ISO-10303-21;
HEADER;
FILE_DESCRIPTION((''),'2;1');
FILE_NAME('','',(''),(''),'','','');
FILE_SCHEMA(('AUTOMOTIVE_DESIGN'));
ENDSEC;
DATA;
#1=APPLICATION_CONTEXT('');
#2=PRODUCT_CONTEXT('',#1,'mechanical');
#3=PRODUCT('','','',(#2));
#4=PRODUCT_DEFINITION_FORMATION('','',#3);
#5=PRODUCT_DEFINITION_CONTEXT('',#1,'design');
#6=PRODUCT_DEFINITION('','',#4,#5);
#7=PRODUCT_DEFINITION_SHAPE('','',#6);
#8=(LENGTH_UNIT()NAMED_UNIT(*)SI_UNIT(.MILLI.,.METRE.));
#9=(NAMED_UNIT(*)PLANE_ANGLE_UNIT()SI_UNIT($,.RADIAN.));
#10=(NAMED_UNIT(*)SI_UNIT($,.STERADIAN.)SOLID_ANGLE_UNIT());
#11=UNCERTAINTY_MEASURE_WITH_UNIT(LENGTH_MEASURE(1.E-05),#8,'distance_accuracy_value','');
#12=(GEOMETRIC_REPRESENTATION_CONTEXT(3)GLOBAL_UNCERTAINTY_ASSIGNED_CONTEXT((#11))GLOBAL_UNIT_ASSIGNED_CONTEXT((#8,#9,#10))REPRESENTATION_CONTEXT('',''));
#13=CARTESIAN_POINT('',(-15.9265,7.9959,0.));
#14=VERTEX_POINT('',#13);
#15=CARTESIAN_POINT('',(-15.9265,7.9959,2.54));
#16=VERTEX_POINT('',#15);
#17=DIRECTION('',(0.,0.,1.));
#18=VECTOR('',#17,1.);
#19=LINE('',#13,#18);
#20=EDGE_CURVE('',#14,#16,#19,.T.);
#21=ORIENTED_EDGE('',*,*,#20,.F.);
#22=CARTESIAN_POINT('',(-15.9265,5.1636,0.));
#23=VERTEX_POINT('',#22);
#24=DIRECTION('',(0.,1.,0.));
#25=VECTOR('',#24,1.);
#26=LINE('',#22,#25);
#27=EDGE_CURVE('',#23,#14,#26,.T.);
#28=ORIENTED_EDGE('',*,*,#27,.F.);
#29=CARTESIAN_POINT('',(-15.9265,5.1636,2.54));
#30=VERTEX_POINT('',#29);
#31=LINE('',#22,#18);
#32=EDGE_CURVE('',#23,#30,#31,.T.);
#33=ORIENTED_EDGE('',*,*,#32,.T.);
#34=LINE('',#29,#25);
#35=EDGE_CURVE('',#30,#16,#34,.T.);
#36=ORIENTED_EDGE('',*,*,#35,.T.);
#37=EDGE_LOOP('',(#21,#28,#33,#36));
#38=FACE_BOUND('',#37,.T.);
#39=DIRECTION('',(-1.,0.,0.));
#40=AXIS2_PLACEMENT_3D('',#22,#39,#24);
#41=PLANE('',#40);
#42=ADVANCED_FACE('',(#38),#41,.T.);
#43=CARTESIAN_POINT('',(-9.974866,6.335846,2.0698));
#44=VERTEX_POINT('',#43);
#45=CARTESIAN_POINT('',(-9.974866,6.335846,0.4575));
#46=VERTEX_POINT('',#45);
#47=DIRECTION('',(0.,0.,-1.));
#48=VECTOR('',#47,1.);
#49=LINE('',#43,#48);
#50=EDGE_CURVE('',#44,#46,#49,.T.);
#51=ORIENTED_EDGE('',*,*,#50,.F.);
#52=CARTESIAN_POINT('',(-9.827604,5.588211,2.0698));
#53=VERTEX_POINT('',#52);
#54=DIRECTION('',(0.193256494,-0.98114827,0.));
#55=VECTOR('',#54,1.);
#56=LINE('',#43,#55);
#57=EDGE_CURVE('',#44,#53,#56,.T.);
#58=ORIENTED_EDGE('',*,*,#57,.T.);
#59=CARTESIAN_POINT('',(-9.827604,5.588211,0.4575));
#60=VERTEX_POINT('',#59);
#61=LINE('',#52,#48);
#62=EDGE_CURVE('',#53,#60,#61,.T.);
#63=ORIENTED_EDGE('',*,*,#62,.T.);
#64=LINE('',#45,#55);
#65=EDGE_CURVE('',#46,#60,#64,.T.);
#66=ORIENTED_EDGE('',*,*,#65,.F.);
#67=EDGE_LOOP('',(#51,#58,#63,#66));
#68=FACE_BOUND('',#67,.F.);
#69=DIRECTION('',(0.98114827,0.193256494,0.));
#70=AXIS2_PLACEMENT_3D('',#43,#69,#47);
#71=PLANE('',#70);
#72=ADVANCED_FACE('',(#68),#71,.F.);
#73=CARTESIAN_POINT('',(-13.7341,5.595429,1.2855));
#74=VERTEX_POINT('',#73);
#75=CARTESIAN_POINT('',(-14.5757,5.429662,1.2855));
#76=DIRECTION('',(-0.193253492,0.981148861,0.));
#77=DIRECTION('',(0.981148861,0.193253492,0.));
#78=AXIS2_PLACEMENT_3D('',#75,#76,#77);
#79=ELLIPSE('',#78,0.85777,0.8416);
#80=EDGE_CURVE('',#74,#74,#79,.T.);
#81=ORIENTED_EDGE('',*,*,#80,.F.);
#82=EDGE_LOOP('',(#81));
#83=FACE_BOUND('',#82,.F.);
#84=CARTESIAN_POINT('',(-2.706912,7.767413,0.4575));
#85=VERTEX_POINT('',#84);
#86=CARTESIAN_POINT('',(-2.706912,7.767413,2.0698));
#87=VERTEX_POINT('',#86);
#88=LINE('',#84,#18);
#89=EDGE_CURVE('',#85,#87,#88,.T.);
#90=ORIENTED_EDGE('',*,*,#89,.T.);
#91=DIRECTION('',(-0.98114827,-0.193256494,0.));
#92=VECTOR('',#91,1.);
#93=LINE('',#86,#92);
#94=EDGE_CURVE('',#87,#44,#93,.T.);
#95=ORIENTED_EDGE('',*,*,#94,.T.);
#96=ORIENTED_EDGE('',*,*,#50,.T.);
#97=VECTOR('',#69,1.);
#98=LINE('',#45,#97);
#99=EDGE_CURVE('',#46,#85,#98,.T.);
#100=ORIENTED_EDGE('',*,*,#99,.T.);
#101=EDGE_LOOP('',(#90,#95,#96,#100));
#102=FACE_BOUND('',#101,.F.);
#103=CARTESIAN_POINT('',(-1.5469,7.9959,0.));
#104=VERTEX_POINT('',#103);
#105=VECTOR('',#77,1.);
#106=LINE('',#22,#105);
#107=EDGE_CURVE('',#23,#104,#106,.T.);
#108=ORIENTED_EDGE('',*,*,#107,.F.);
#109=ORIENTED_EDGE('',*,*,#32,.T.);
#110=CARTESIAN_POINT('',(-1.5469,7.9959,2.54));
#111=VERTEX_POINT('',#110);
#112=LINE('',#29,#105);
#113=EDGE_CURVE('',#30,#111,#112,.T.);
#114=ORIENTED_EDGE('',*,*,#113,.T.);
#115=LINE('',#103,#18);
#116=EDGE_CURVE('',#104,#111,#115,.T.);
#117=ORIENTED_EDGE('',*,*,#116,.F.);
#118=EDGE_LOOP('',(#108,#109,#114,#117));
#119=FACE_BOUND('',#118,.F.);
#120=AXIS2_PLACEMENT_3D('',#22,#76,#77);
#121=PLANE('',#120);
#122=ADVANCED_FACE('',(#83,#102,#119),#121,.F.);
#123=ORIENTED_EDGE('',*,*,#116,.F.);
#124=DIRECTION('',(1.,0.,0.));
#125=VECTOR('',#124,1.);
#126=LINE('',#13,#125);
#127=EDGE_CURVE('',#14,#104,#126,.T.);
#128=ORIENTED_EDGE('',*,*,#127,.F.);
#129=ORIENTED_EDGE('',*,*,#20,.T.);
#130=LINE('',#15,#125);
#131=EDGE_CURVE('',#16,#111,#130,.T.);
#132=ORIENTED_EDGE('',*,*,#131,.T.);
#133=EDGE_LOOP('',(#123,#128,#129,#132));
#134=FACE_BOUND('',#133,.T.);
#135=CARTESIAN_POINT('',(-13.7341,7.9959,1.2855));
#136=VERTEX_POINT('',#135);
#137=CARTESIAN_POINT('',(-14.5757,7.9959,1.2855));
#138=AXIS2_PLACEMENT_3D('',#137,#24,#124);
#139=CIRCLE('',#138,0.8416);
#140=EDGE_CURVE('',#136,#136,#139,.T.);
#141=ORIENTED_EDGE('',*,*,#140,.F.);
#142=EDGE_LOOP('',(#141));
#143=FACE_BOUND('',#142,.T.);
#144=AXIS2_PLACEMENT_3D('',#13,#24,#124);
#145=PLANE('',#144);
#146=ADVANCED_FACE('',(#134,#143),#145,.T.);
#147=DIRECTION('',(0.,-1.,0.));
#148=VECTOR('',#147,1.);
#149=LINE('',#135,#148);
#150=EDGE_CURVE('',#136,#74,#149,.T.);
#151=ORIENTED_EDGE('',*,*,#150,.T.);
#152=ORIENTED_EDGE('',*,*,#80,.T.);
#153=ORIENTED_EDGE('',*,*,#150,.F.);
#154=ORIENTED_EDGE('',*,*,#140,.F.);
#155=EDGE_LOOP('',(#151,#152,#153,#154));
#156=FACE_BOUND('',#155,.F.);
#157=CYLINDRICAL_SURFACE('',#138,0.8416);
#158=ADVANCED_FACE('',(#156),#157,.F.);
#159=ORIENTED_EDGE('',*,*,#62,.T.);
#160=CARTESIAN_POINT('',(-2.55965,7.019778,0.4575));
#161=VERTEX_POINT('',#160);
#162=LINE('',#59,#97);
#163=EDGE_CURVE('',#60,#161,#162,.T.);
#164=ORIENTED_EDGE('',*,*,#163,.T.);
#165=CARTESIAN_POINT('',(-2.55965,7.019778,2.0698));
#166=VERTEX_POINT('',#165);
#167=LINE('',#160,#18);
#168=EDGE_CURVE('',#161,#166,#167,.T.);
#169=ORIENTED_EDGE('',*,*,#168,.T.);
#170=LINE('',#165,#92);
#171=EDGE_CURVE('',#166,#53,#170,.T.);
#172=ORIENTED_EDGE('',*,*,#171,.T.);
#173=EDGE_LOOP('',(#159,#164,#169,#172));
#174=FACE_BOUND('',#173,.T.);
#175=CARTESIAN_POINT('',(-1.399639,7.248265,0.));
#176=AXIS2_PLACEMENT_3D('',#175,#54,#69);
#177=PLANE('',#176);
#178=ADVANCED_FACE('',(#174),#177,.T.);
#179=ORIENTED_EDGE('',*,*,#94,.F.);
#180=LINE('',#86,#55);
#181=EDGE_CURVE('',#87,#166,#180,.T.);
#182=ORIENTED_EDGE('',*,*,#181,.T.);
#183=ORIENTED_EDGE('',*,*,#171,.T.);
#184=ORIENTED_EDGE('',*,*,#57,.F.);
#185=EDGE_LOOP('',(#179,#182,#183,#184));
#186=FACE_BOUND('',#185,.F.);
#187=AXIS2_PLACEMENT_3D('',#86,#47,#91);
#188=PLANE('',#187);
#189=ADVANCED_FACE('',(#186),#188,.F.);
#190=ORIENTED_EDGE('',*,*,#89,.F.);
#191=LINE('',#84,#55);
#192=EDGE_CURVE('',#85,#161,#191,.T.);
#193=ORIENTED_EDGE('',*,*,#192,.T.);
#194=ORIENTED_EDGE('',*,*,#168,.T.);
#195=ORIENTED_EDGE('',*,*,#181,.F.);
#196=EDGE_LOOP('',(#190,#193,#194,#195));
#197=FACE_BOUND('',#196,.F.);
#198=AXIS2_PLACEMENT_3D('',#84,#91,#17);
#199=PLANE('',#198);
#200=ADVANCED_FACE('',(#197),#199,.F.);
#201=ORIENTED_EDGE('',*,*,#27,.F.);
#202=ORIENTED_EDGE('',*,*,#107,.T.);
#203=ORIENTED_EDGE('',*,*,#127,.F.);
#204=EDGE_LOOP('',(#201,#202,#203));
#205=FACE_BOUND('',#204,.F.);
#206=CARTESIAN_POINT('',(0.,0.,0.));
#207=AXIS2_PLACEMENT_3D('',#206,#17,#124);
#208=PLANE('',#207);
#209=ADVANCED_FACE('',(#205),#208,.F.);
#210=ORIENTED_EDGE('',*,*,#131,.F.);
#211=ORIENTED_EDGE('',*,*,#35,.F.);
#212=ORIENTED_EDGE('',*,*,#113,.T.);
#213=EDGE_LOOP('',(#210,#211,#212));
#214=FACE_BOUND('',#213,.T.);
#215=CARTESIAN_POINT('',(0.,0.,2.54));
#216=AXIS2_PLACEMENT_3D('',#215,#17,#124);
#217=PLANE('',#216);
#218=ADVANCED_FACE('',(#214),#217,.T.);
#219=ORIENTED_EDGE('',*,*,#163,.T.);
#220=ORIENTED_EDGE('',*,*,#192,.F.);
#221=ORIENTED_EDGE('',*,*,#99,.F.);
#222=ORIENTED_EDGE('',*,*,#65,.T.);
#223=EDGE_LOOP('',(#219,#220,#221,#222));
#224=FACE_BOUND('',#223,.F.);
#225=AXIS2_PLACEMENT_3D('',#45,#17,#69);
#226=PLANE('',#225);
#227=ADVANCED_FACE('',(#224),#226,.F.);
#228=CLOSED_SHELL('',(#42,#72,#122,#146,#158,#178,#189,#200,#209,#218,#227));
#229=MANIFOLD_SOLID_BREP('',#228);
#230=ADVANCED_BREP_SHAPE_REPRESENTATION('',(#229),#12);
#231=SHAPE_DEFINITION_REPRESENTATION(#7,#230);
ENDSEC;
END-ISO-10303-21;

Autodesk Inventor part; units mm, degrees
ref_plane "YZ Plane" through (0, 0, 0) normal (1, 0, 0) x (0, 1, 0)
ref_plane "XZ Plane" through (0, 0, 0) normal (0, 1, 0) x (-1, 0, 0)
ref_plane "XY Plane" through (0, 0, 0) normal (0, 0, 1) x (1, 0, 0)
sketch "Sketch1" plane through (0, 0, 0) normal (0, 0, 1) x (1, 0, 0)
  line L0 (-15.9265, 7.9959) -> (-1.5469, 7.9959)
  line L1 (-15.9265, 5.1636) -> (-15.9265, 7.9959)
  line L2 (-15.9265, 5.1636) -> (-1.5469, 7.9959)
  point P0 (0, 0)
extrude "Extrusion1" add sketch "Sketch1" along normal blind 2.54
sketch "Sketch2" plane through (-1.5469, 7.9959, 0) normal (0.1932565, -0.9811483, 0) x (0.9811483, 0.1932565, 0)
  line L0 (-1.1823, 2.0698) -> (-8.5899, 2.0698)
  line L1 (-8.5899, 2.0698) -> (-8.5899, 0.4575)
  line L2 (-8.5899, 0.4575) -> (-1.1823, 0.4575)
  line L3 (-1.1823, 0.4575) -> (-1.1823, 2.0698)
  point P0 (-0.0275, 0)
extrude "Extrusion2" add sketch "Sketch2" along normal blind 0.762
sketch "Sketch3" plane through (-15.9265, 7.9959, 0) normal (0, 1, 0) x (1, 0, 0)
  circle A0 centre (1.3508, -1.2855) radius 0.8416
  point P0 (15.9265, 0)
extrude "Extrusion3" cut sketch "Sketch3" against normal blind 12.7
properties part number "GRIPPER2"
